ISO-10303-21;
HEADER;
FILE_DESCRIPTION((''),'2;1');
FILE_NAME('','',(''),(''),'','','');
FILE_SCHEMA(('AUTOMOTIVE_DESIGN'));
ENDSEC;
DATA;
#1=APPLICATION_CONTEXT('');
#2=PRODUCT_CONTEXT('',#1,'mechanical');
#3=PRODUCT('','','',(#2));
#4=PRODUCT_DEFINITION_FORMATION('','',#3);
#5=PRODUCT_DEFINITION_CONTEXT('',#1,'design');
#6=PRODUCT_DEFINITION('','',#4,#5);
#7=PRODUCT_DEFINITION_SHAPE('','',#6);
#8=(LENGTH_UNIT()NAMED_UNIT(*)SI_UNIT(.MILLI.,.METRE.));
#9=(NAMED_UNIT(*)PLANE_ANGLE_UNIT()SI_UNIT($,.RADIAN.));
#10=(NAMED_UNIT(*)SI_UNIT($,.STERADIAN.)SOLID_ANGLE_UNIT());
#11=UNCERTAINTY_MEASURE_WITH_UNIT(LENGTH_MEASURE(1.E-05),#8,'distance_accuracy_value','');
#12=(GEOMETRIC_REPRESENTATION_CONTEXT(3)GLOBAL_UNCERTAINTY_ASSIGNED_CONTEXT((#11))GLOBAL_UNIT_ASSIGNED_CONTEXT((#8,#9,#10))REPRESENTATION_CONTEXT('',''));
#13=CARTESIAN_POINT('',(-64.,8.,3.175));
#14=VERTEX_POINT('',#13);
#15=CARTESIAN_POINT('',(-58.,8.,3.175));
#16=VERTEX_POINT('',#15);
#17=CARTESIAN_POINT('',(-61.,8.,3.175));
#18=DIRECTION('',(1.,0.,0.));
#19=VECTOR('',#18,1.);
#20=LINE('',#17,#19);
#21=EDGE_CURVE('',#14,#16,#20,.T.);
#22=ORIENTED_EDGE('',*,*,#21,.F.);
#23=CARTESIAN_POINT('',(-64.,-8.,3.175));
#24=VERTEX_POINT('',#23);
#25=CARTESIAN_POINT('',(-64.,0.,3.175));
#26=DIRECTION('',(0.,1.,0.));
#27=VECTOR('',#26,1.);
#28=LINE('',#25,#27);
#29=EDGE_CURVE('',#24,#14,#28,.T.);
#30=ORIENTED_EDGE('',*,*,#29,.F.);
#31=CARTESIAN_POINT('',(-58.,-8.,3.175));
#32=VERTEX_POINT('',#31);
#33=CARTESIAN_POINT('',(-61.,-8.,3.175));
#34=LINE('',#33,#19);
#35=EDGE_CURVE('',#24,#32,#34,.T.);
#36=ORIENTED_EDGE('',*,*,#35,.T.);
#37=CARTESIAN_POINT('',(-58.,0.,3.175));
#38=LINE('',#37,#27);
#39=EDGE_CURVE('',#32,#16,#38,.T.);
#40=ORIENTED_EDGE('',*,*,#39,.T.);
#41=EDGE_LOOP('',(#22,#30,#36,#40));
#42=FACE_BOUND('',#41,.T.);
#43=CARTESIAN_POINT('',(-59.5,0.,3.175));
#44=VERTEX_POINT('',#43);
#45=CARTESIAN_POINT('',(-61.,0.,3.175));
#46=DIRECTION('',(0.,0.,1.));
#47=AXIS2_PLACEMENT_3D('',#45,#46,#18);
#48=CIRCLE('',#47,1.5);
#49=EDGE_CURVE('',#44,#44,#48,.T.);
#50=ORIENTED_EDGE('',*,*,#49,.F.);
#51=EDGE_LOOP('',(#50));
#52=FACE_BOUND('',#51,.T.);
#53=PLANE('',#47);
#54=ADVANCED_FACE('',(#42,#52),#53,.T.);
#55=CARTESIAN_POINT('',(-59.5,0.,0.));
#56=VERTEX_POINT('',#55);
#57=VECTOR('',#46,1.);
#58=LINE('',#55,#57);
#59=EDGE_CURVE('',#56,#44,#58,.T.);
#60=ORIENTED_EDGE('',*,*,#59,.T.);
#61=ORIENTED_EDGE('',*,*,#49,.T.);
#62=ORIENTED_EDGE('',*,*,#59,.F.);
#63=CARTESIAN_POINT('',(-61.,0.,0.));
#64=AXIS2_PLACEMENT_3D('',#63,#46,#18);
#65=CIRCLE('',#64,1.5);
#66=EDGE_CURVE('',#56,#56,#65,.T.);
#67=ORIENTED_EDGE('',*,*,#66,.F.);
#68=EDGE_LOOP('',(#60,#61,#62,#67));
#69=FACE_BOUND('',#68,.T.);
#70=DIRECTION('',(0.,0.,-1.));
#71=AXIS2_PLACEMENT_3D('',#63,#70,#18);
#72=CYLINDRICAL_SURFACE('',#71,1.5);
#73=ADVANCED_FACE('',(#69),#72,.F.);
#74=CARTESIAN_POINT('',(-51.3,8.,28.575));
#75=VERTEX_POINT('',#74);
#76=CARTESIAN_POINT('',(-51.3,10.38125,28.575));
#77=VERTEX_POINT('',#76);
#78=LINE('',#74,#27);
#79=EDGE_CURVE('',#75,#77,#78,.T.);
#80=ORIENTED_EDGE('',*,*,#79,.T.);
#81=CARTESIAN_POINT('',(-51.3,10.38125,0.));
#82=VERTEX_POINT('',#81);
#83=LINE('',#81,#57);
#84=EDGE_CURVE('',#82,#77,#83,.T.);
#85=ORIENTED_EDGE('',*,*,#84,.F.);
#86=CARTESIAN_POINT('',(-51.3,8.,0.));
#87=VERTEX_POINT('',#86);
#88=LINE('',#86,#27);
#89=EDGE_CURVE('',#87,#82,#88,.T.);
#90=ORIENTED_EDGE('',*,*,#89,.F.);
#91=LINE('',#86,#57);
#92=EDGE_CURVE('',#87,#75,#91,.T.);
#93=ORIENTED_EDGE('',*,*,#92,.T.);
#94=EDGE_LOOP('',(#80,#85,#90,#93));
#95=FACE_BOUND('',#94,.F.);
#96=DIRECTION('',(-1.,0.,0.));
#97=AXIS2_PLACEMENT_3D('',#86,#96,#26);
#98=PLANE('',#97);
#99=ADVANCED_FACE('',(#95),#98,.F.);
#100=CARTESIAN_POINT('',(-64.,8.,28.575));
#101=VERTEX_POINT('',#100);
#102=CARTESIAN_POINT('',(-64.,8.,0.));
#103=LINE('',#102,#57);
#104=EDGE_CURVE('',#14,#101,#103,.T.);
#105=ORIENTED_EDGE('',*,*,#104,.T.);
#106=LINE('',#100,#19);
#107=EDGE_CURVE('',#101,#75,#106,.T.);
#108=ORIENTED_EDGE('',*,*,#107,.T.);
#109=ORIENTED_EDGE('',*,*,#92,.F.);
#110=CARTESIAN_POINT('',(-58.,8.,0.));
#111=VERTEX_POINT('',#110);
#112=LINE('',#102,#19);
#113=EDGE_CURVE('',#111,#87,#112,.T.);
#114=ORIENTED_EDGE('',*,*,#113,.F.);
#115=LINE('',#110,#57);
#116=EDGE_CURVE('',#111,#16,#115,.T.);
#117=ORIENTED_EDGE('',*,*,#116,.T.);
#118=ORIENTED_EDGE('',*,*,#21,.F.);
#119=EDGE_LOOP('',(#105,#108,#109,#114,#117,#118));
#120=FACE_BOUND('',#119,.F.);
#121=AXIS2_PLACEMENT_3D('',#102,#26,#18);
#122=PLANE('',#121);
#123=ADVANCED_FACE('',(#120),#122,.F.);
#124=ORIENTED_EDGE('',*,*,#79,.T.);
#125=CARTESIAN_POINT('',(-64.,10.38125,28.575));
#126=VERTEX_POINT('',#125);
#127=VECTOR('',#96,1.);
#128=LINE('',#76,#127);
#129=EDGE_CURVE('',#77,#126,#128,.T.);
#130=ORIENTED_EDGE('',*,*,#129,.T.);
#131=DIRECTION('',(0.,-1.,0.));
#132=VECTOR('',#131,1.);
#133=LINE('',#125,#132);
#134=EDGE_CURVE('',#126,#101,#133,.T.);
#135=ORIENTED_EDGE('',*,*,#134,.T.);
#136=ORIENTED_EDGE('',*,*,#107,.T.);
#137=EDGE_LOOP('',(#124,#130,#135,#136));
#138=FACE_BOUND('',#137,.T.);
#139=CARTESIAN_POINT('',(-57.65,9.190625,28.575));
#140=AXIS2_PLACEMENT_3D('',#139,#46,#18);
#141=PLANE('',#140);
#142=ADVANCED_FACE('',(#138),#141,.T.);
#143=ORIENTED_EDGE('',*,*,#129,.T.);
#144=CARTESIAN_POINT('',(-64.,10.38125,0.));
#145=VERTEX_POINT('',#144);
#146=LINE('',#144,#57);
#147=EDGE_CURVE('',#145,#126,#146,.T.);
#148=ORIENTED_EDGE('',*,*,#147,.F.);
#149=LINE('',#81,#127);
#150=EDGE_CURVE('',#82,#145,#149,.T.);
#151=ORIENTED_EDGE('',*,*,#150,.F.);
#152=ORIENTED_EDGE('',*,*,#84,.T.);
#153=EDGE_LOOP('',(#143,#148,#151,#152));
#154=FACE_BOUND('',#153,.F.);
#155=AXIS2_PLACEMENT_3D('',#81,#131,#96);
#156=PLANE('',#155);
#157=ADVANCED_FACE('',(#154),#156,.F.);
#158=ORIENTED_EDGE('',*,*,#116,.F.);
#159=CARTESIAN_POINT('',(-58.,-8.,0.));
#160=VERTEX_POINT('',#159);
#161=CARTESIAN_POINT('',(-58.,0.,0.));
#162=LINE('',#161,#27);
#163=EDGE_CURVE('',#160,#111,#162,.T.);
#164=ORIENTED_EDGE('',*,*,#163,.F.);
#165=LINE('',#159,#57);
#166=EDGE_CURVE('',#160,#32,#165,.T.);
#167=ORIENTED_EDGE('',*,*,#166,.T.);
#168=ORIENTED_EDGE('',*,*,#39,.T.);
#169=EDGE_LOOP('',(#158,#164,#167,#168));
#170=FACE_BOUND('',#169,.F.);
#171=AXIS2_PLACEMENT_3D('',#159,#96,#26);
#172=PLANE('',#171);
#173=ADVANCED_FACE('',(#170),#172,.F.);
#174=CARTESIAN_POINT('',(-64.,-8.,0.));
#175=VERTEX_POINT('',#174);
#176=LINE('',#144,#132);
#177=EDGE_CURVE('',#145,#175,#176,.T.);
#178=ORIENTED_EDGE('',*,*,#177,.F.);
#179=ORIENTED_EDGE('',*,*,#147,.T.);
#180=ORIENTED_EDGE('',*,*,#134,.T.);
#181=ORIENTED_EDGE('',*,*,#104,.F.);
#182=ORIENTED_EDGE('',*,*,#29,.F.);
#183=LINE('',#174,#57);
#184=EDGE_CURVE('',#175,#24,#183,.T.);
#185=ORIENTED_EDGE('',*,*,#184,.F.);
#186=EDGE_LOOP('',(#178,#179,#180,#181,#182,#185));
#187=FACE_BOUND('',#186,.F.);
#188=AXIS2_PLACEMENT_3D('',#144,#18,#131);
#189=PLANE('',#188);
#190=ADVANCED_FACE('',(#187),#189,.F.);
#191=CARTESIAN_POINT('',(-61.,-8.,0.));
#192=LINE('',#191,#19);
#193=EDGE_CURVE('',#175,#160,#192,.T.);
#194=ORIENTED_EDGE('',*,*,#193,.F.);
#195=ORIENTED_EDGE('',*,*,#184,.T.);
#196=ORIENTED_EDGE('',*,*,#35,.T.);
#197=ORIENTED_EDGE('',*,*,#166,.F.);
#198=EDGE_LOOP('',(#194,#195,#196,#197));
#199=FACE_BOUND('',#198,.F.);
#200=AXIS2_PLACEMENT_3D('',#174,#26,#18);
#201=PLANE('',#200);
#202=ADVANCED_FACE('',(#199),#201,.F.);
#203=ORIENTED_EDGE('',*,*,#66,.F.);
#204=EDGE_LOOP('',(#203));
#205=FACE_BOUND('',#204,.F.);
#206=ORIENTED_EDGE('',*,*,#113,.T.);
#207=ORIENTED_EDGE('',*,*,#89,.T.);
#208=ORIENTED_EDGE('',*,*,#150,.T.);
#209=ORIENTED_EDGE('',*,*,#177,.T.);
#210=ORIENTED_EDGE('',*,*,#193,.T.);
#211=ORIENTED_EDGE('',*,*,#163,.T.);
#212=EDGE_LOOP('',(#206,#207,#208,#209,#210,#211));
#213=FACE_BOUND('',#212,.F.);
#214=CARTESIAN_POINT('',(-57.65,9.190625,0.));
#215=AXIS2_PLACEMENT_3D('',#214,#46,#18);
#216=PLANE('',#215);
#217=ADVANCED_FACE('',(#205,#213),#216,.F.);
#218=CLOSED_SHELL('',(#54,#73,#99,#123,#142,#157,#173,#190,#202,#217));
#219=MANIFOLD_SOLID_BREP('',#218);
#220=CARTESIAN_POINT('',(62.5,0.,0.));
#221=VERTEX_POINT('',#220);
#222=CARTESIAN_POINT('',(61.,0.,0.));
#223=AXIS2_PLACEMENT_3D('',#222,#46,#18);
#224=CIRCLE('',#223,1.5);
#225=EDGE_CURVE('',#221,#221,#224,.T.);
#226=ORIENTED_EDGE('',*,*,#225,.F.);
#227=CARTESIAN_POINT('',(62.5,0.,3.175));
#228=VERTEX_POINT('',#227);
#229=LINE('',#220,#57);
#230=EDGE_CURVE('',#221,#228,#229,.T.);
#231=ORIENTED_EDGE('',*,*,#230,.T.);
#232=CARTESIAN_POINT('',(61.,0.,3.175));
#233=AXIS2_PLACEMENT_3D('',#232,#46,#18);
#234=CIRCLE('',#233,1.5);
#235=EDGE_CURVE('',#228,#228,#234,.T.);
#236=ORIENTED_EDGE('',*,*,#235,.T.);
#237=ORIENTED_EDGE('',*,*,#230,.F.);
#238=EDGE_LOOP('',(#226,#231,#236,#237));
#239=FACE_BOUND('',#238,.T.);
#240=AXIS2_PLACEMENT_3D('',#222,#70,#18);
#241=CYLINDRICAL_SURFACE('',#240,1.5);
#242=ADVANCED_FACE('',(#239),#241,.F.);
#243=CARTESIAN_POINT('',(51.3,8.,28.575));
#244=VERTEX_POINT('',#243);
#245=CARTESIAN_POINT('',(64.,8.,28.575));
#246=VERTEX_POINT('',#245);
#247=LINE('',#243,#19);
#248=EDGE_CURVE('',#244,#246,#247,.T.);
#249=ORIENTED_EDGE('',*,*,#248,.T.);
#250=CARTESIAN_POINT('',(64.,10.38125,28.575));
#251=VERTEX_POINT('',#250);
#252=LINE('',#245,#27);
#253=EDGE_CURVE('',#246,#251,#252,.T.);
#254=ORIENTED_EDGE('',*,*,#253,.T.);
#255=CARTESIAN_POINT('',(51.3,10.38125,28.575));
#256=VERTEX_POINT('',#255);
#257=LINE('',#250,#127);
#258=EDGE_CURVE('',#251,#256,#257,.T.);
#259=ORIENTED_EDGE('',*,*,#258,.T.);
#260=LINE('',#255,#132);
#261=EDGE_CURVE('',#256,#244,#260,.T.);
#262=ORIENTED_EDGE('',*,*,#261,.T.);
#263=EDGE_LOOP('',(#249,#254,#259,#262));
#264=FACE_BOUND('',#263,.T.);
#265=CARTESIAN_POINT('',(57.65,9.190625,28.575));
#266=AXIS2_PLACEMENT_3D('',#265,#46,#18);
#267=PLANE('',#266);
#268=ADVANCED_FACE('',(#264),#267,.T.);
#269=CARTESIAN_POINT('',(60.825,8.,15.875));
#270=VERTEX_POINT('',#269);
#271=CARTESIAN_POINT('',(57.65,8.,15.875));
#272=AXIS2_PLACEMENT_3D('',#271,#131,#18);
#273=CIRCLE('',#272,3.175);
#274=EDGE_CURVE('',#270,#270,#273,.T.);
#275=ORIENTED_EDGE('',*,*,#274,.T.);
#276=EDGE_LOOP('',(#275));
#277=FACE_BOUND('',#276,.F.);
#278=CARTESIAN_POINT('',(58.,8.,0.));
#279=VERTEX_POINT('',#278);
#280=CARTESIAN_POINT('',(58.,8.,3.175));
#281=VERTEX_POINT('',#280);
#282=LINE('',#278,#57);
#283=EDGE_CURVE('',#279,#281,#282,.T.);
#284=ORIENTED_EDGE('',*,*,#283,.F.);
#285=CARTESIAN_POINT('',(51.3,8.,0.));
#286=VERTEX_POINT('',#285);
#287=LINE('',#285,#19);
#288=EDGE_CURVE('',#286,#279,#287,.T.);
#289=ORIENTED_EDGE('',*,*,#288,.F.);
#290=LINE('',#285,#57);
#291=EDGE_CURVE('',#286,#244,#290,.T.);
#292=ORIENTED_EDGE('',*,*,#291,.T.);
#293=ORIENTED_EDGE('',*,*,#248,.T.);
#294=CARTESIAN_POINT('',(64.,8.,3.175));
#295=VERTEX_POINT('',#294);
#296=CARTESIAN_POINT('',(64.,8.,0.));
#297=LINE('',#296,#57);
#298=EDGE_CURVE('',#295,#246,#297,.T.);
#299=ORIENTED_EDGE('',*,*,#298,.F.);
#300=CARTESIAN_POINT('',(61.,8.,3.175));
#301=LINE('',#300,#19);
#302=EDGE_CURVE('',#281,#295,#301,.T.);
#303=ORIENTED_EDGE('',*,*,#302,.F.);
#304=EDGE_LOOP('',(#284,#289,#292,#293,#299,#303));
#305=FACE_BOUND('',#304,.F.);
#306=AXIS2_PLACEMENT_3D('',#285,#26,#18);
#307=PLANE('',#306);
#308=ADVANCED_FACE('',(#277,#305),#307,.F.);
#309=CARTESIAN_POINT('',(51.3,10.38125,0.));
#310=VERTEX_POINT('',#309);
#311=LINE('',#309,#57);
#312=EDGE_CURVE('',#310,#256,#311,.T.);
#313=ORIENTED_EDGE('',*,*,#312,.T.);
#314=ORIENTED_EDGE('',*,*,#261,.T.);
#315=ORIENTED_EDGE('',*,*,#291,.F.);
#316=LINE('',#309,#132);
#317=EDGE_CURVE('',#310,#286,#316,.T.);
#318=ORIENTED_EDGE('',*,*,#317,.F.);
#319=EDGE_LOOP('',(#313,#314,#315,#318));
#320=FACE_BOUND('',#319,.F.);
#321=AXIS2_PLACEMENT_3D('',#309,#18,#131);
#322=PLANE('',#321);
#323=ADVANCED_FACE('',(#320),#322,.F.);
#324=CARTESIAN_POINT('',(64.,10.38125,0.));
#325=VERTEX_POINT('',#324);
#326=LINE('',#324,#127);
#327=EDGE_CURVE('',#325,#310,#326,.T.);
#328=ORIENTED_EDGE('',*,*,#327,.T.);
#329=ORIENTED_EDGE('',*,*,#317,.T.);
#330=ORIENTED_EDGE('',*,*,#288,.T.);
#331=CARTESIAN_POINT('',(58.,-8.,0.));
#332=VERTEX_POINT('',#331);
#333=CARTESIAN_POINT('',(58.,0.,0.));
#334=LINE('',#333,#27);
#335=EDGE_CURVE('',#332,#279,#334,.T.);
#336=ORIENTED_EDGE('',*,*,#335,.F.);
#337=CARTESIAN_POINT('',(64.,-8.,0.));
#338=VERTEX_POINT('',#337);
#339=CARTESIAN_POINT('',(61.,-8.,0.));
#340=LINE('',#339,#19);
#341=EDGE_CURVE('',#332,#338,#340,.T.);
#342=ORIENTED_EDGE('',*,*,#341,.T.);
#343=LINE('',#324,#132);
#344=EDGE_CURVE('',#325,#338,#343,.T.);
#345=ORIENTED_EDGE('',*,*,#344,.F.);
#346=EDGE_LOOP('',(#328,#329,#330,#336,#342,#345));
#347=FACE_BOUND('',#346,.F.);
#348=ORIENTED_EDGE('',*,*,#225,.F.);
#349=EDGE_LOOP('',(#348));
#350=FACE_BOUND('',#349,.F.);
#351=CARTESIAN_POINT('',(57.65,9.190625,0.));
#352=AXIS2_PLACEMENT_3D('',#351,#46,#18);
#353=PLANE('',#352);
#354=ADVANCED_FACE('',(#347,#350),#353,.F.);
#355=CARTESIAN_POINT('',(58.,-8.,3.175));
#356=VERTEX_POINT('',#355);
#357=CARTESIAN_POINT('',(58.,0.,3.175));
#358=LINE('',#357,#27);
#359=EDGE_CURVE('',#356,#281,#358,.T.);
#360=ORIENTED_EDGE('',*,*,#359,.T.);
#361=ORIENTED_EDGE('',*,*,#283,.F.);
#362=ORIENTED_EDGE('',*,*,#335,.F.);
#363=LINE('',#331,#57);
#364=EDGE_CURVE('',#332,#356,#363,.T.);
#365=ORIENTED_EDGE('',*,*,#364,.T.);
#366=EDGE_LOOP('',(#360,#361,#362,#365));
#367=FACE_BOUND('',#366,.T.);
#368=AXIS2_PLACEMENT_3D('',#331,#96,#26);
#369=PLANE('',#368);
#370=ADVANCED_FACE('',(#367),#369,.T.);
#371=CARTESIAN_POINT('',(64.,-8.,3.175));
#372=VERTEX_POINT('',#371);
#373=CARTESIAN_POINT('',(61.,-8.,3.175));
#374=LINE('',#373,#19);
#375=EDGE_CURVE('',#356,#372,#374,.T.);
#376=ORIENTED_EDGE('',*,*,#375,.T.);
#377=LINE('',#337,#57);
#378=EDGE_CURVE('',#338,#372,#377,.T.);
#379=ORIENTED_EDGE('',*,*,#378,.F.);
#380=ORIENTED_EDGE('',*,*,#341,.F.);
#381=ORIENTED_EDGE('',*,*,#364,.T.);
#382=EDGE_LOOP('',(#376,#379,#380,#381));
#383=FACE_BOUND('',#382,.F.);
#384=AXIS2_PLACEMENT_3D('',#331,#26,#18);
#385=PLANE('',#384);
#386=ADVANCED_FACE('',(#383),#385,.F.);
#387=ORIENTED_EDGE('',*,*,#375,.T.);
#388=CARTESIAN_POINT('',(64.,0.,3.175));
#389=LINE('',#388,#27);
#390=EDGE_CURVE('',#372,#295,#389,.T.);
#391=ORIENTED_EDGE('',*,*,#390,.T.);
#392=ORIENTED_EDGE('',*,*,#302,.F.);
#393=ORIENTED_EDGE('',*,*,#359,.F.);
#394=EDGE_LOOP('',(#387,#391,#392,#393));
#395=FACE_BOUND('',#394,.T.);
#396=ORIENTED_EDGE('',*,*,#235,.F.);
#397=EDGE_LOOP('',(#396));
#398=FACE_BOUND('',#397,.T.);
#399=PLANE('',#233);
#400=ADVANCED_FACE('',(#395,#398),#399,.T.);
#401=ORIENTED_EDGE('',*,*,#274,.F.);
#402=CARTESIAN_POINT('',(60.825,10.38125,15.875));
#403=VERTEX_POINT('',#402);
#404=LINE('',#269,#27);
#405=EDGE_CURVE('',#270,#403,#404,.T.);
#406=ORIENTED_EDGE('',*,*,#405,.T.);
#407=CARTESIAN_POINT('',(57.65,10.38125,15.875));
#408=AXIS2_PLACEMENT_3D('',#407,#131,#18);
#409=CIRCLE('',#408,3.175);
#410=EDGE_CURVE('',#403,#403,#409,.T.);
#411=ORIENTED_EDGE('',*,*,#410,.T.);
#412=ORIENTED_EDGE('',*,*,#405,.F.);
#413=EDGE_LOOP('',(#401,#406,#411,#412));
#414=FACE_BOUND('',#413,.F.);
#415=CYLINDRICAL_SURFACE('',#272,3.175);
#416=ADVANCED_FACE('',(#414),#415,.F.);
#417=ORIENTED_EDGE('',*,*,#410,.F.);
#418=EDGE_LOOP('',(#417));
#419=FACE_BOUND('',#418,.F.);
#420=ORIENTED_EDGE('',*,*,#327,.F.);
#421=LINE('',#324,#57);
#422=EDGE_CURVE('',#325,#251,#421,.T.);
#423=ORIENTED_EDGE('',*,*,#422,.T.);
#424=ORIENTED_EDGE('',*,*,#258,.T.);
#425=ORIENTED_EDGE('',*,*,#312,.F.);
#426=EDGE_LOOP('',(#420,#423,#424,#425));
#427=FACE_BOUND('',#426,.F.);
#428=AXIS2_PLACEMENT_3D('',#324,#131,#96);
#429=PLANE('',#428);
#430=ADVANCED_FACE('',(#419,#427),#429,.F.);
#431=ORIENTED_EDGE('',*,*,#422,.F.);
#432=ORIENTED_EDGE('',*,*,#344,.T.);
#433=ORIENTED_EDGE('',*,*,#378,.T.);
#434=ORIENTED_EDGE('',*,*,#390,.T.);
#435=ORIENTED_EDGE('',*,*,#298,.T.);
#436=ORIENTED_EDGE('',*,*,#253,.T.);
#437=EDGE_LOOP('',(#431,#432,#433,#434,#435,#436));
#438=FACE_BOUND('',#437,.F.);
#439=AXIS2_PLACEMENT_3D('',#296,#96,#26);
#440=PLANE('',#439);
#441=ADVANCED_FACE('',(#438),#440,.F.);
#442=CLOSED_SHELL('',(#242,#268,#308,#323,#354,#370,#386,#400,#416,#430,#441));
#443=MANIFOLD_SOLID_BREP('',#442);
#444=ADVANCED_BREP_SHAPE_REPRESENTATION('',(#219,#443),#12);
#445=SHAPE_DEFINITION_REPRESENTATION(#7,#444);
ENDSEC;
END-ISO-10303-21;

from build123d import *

# Parameters (mm, degrees)
F0_W     = 6
F0_H     = 16
F0_R     = 1.5
F1_DEPTH = 3.175
F2_DEPTH = 28.575
F3_R     = 3.175
F4_DEPTH = 2.38225


# Not quite as in the source:
# - a length typed as a fraction of an inch, garbled in the dataset ("3 / 203.2 mm" for 3/8 in), is restored


with BuildPart() as f1:
    # F0 (on Top) → F1 (new body)
    with BuildSketch(Plane.XY):
        with Locations((-61, 0)):
            Rectangle(F0_W, F0_H)
        with Locations((-61, 0)):
            Circle(F0_R, mode=Mode.SUBTRACT)
    extrude(amount=F1_DEPTH)

    # F0 (on Top) → F2, piece 2 (join)
    with BuildSketch(Plane.XY):
        Polygon((-64, 10.38125), (-64, 8), (-58, 8), (-51.3, 8), (-51.3, 10.38125), align=None)
    extrude(amount=F2_DEPTH)


with BuildPart() as f1b:
    # F0 (on Top) → F1, piece 2 (new body)
    with BuildSketch(Plane.XY):
        with Locations((61, 0)):
            Rectangle(F0_W, F0_H)
        with Locations((61, 0)):
            Circle(F0_R, mode=Mode.SUBTRACT)
    extrude(amount=F1_DEPTH)

    # F0 (on Top) → F2 (join)
    with BuildSketch(Plane.XY):
        Polygon((51.3, 8), (58, 8), (64, 8), (64, 10.38125), (51.3, 10.38125), align=None)
    extrude(amount=F2_DEPTH)

    # F3 (on face) → F4 (cut, through all)
    with BuildSketch(Plane.XZ.offset(-8)):
        with Locations((57.65, 15.875)):
            Circle(F3_R)
    extrude(amount=-F4_DEPTH, mode=Mode.SUBTRACT)


solid = Compound([f1.part, f1b.part])
